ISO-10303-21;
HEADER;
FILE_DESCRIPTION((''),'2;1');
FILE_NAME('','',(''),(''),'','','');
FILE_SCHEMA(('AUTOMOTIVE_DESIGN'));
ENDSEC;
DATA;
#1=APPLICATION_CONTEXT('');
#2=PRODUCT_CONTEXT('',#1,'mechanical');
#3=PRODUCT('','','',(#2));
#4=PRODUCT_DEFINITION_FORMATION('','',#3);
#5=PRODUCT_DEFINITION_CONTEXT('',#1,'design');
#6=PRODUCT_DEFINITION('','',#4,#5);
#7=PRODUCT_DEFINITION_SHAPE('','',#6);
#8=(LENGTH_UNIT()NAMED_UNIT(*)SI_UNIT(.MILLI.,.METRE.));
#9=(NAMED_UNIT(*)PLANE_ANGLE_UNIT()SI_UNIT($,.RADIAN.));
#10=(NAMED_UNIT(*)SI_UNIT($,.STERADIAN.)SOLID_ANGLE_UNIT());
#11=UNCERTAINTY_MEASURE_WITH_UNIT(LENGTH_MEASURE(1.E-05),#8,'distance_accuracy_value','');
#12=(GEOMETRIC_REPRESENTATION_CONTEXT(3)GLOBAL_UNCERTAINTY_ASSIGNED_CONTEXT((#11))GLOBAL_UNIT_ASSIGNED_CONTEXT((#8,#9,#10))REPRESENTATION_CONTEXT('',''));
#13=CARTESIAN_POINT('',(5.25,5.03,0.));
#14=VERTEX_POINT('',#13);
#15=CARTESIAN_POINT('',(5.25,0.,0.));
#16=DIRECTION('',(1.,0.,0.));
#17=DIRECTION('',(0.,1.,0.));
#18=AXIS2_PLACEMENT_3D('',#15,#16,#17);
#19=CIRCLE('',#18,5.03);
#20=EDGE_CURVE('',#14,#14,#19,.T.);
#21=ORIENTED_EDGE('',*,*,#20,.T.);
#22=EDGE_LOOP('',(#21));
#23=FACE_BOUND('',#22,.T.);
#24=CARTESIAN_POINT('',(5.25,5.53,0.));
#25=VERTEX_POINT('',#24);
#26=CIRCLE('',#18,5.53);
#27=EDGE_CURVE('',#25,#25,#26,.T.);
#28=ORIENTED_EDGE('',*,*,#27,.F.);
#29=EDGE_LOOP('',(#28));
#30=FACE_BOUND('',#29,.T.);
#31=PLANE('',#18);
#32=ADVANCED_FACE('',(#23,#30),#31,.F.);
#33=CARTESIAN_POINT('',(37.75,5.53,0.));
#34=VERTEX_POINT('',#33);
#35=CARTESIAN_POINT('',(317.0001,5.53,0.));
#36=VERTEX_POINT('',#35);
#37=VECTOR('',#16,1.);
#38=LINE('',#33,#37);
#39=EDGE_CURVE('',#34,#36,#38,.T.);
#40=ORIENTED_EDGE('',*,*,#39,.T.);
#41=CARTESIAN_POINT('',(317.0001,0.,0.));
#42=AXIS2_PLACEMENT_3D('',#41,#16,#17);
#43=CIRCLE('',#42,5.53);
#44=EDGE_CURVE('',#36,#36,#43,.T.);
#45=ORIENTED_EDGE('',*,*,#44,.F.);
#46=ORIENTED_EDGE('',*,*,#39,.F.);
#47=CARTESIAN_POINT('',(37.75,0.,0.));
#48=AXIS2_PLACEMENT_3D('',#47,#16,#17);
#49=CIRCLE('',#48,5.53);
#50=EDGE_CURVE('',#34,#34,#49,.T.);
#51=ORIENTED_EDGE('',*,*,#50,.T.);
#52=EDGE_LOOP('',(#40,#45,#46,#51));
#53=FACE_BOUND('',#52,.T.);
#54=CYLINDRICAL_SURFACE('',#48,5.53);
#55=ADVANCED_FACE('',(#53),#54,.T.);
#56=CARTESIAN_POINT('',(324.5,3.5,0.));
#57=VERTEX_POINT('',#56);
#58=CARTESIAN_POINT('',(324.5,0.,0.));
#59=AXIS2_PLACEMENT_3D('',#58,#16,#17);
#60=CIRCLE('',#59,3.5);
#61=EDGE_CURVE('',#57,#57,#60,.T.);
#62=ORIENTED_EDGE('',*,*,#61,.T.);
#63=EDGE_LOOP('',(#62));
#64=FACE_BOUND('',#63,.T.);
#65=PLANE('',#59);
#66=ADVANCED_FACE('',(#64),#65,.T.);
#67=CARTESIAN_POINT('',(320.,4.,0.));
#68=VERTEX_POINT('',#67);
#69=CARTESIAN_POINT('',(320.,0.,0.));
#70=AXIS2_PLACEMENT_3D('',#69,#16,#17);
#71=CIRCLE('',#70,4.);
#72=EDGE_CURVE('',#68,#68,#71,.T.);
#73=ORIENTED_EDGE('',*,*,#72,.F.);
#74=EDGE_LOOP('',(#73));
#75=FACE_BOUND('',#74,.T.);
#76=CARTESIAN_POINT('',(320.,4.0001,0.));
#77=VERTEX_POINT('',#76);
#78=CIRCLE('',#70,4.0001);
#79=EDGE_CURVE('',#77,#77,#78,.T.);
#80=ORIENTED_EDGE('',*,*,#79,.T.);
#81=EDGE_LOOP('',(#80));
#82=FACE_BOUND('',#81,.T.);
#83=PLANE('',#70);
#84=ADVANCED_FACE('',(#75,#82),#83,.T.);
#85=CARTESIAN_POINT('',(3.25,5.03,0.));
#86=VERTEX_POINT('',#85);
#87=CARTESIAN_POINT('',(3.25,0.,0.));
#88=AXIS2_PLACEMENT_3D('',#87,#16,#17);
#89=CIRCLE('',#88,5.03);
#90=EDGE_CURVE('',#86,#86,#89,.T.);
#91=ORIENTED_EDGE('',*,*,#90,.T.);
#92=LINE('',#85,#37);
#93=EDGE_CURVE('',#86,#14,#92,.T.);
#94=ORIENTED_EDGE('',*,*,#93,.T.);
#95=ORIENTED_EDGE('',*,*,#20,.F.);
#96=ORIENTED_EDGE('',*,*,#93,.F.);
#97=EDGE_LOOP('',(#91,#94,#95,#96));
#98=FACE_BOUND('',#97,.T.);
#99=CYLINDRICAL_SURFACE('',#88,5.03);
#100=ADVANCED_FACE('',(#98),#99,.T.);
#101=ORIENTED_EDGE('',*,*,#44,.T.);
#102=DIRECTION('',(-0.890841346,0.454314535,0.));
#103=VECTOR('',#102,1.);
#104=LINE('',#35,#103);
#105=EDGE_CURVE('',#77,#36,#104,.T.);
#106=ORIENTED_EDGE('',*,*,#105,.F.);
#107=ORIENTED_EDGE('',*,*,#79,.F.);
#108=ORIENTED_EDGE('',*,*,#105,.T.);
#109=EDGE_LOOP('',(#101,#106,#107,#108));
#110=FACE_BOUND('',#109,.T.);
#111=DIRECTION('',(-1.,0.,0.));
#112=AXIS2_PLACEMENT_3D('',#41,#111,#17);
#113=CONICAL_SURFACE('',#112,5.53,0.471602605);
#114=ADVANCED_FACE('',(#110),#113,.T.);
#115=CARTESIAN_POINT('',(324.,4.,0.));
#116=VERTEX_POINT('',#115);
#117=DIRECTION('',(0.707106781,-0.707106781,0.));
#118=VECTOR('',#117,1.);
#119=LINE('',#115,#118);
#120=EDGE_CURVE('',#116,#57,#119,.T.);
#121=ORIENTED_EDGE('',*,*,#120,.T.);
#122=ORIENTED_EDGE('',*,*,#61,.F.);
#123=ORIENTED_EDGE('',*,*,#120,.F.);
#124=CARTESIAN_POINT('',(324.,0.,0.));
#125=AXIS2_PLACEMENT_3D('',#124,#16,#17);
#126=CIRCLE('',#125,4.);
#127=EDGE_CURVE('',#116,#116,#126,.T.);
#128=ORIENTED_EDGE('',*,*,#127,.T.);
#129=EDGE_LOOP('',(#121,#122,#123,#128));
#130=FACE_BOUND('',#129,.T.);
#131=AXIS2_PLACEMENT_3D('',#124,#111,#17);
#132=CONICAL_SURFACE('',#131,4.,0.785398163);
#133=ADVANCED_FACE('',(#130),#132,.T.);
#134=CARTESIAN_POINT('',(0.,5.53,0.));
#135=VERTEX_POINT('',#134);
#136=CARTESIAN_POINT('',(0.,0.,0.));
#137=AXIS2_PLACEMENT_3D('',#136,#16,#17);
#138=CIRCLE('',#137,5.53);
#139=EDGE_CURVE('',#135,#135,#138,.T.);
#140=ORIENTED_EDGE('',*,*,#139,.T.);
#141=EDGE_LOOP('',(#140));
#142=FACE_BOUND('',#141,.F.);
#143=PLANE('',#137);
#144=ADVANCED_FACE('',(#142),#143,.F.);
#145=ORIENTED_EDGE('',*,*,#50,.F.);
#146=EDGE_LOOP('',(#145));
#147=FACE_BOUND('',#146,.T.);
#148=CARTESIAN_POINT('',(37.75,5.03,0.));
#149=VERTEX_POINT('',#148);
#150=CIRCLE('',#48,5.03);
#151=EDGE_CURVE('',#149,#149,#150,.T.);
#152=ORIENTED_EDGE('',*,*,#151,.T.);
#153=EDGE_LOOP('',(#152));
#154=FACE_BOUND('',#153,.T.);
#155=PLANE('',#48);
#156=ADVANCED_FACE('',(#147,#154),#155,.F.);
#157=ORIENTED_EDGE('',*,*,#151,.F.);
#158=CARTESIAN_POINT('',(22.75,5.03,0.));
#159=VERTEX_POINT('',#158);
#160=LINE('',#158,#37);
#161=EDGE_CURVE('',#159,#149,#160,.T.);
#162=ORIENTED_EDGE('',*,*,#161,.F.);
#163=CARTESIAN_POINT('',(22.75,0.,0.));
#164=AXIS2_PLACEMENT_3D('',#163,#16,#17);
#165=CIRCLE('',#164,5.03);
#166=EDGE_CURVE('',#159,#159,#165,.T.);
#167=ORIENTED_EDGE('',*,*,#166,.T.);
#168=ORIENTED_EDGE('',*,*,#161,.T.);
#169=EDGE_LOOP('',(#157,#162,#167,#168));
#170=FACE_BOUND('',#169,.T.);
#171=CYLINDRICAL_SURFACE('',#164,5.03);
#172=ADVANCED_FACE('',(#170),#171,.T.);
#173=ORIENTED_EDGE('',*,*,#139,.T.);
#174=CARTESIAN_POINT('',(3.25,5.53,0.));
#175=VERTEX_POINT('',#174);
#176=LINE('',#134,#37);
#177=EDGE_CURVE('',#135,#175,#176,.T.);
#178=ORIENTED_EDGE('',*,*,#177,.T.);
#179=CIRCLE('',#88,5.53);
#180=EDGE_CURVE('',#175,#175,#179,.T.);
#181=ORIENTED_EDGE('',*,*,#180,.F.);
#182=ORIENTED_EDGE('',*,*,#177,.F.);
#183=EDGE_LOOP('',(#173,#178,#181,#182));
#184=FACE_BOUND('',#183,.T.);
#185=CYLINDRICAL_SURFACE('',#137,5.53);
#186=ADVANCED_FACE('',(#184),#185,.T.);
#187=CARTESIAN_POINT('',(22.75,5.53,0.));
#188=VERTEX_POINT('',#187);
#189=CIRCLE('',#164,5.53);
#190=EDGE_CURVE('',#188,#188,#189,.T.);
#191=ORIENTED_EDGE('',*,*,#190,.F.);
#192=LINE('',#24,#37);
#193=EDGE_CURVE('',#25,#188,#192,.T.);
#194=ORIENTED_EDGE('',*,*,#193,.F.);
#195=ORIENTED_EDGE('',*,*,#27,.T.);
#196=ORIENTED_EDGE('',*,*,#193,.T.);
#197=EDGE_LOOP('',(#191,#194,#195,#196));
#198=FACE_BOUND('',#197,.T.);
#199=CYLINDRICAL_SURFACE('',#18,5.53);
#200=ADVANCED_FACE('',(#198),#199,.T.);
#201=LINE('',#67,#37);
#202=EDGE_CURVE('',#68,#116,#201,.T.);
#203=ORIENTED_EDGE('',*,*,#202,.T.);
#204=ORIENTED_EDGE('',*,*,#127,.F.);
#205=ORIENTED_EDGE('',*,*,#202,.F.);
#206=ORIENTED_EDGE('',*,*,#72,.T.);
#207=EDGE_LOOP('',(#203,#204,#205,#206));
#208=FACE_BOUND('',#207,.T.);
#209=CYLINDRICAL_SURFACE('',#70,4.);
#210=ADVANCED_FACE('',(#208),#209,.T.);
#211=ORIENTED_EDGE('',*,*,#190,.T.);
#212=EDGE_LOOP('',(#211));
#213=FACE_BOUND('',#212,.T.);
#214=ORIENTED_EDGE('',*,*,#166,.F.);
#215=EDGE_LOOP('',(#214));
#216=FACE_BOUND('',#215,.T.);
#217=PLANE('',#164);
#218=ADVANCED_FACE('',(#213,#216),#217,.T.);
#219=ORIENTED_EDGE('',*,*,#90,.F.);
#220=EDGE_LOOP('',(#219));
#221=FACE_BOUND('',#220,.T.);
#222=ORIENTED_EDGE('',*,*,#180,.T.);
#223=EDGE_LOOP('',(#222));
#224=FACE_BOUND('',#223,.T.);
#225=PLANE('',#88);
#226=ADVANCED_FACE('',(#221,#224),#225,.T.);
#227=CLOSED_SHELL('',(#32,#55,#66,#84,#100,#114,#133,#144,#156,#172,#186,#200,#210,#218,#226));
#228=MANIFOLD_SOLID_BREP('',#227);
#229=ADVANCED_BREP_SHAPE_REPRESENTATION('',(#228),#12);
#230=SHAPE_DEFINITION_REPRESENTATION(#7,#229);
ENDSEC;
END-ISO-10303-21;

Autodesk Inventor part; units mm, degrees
ref_plane "YZ Plane" through (0, 0, 0) normal (1, 0, 0) x (0, 1, 0)
ref_plane "XZ Plane" through (0, 0, 0) normal (0, 1, 0) x (-1, 0, 0)
ref_plane "XY Plane" through (0, 0, 0) normal (0, 0, 1) x (1, 0, 0)
sketch "Sketch1" plane through (0, 0, 0) normal (0, 0, 1) x (1, 0, 0)
  line L0 (-64.9, 0) -> (389.4, 0) projected
  line L1 (0, 6.636) -> (0, -1.106) projected
  line L2 (0, 0) -> (0, 5.53)
  line L3 (0, 5.53) -> (3.25, 5.53)
  line L4 (3.25, 5.53) -> (3.25, 5.03)
  line L5 (3.25, 5.03) -> (5.25, 5.03)
  line L6 (5.25, 5.03) -> (5.25, 5.53)
  line L7 (5.25, 5.53) -> (22.75, 5.53)
  line L8 (22.75, 5.53) -> (22.75, 5.03)
  line L9 (22.75, 5.03) -> (37.75, 5.03)
  line L10 (37.75, 5.03) -> (37.75, 5.53)
  line L11 (37.75, 5.53) -> (320, 5.53)
  line L12 (320, 5.53) -> (320, 4)
  line L13 (320, 4) -> (324.5, 4)
  line L14 (324.5, 4) -> (324.5, 0)
  line L15 (0, 0) -> (324.5, 0)
  dimension "d0" = 37.75
  dimension "d1" = 15
  dimension "d2" = 17.5
  dimension "d3" = 2
  dimension "d4" = 11.06
  dimension "d5" = 0.5
  dimension "d6" = 0.5
  dimension "d7" = 320
  dimension "d8" = 324.5
  dimension "d9" = 8
revolve "Revolution1" add sketch "Sketch1" angle 360 about axis through (0, 0, 0) along (1, 0, 0)
chamfer "Chamfer1" distance 1.53 distance2 3 1 edges at (320, -5.53, 0) measured on face at (320, 4.9664, -0.4411)
chamfer "Chamfer2" distance 0.5 angle 45 1 edges at (324.5, -4, 0)
thread "Thread1" size "M12x1.75" class "6g" standard "ANSI Metric M Profile" full length
equation "\"d6\" = d5"
properties part number "201-05" material "Stainless Steel"
